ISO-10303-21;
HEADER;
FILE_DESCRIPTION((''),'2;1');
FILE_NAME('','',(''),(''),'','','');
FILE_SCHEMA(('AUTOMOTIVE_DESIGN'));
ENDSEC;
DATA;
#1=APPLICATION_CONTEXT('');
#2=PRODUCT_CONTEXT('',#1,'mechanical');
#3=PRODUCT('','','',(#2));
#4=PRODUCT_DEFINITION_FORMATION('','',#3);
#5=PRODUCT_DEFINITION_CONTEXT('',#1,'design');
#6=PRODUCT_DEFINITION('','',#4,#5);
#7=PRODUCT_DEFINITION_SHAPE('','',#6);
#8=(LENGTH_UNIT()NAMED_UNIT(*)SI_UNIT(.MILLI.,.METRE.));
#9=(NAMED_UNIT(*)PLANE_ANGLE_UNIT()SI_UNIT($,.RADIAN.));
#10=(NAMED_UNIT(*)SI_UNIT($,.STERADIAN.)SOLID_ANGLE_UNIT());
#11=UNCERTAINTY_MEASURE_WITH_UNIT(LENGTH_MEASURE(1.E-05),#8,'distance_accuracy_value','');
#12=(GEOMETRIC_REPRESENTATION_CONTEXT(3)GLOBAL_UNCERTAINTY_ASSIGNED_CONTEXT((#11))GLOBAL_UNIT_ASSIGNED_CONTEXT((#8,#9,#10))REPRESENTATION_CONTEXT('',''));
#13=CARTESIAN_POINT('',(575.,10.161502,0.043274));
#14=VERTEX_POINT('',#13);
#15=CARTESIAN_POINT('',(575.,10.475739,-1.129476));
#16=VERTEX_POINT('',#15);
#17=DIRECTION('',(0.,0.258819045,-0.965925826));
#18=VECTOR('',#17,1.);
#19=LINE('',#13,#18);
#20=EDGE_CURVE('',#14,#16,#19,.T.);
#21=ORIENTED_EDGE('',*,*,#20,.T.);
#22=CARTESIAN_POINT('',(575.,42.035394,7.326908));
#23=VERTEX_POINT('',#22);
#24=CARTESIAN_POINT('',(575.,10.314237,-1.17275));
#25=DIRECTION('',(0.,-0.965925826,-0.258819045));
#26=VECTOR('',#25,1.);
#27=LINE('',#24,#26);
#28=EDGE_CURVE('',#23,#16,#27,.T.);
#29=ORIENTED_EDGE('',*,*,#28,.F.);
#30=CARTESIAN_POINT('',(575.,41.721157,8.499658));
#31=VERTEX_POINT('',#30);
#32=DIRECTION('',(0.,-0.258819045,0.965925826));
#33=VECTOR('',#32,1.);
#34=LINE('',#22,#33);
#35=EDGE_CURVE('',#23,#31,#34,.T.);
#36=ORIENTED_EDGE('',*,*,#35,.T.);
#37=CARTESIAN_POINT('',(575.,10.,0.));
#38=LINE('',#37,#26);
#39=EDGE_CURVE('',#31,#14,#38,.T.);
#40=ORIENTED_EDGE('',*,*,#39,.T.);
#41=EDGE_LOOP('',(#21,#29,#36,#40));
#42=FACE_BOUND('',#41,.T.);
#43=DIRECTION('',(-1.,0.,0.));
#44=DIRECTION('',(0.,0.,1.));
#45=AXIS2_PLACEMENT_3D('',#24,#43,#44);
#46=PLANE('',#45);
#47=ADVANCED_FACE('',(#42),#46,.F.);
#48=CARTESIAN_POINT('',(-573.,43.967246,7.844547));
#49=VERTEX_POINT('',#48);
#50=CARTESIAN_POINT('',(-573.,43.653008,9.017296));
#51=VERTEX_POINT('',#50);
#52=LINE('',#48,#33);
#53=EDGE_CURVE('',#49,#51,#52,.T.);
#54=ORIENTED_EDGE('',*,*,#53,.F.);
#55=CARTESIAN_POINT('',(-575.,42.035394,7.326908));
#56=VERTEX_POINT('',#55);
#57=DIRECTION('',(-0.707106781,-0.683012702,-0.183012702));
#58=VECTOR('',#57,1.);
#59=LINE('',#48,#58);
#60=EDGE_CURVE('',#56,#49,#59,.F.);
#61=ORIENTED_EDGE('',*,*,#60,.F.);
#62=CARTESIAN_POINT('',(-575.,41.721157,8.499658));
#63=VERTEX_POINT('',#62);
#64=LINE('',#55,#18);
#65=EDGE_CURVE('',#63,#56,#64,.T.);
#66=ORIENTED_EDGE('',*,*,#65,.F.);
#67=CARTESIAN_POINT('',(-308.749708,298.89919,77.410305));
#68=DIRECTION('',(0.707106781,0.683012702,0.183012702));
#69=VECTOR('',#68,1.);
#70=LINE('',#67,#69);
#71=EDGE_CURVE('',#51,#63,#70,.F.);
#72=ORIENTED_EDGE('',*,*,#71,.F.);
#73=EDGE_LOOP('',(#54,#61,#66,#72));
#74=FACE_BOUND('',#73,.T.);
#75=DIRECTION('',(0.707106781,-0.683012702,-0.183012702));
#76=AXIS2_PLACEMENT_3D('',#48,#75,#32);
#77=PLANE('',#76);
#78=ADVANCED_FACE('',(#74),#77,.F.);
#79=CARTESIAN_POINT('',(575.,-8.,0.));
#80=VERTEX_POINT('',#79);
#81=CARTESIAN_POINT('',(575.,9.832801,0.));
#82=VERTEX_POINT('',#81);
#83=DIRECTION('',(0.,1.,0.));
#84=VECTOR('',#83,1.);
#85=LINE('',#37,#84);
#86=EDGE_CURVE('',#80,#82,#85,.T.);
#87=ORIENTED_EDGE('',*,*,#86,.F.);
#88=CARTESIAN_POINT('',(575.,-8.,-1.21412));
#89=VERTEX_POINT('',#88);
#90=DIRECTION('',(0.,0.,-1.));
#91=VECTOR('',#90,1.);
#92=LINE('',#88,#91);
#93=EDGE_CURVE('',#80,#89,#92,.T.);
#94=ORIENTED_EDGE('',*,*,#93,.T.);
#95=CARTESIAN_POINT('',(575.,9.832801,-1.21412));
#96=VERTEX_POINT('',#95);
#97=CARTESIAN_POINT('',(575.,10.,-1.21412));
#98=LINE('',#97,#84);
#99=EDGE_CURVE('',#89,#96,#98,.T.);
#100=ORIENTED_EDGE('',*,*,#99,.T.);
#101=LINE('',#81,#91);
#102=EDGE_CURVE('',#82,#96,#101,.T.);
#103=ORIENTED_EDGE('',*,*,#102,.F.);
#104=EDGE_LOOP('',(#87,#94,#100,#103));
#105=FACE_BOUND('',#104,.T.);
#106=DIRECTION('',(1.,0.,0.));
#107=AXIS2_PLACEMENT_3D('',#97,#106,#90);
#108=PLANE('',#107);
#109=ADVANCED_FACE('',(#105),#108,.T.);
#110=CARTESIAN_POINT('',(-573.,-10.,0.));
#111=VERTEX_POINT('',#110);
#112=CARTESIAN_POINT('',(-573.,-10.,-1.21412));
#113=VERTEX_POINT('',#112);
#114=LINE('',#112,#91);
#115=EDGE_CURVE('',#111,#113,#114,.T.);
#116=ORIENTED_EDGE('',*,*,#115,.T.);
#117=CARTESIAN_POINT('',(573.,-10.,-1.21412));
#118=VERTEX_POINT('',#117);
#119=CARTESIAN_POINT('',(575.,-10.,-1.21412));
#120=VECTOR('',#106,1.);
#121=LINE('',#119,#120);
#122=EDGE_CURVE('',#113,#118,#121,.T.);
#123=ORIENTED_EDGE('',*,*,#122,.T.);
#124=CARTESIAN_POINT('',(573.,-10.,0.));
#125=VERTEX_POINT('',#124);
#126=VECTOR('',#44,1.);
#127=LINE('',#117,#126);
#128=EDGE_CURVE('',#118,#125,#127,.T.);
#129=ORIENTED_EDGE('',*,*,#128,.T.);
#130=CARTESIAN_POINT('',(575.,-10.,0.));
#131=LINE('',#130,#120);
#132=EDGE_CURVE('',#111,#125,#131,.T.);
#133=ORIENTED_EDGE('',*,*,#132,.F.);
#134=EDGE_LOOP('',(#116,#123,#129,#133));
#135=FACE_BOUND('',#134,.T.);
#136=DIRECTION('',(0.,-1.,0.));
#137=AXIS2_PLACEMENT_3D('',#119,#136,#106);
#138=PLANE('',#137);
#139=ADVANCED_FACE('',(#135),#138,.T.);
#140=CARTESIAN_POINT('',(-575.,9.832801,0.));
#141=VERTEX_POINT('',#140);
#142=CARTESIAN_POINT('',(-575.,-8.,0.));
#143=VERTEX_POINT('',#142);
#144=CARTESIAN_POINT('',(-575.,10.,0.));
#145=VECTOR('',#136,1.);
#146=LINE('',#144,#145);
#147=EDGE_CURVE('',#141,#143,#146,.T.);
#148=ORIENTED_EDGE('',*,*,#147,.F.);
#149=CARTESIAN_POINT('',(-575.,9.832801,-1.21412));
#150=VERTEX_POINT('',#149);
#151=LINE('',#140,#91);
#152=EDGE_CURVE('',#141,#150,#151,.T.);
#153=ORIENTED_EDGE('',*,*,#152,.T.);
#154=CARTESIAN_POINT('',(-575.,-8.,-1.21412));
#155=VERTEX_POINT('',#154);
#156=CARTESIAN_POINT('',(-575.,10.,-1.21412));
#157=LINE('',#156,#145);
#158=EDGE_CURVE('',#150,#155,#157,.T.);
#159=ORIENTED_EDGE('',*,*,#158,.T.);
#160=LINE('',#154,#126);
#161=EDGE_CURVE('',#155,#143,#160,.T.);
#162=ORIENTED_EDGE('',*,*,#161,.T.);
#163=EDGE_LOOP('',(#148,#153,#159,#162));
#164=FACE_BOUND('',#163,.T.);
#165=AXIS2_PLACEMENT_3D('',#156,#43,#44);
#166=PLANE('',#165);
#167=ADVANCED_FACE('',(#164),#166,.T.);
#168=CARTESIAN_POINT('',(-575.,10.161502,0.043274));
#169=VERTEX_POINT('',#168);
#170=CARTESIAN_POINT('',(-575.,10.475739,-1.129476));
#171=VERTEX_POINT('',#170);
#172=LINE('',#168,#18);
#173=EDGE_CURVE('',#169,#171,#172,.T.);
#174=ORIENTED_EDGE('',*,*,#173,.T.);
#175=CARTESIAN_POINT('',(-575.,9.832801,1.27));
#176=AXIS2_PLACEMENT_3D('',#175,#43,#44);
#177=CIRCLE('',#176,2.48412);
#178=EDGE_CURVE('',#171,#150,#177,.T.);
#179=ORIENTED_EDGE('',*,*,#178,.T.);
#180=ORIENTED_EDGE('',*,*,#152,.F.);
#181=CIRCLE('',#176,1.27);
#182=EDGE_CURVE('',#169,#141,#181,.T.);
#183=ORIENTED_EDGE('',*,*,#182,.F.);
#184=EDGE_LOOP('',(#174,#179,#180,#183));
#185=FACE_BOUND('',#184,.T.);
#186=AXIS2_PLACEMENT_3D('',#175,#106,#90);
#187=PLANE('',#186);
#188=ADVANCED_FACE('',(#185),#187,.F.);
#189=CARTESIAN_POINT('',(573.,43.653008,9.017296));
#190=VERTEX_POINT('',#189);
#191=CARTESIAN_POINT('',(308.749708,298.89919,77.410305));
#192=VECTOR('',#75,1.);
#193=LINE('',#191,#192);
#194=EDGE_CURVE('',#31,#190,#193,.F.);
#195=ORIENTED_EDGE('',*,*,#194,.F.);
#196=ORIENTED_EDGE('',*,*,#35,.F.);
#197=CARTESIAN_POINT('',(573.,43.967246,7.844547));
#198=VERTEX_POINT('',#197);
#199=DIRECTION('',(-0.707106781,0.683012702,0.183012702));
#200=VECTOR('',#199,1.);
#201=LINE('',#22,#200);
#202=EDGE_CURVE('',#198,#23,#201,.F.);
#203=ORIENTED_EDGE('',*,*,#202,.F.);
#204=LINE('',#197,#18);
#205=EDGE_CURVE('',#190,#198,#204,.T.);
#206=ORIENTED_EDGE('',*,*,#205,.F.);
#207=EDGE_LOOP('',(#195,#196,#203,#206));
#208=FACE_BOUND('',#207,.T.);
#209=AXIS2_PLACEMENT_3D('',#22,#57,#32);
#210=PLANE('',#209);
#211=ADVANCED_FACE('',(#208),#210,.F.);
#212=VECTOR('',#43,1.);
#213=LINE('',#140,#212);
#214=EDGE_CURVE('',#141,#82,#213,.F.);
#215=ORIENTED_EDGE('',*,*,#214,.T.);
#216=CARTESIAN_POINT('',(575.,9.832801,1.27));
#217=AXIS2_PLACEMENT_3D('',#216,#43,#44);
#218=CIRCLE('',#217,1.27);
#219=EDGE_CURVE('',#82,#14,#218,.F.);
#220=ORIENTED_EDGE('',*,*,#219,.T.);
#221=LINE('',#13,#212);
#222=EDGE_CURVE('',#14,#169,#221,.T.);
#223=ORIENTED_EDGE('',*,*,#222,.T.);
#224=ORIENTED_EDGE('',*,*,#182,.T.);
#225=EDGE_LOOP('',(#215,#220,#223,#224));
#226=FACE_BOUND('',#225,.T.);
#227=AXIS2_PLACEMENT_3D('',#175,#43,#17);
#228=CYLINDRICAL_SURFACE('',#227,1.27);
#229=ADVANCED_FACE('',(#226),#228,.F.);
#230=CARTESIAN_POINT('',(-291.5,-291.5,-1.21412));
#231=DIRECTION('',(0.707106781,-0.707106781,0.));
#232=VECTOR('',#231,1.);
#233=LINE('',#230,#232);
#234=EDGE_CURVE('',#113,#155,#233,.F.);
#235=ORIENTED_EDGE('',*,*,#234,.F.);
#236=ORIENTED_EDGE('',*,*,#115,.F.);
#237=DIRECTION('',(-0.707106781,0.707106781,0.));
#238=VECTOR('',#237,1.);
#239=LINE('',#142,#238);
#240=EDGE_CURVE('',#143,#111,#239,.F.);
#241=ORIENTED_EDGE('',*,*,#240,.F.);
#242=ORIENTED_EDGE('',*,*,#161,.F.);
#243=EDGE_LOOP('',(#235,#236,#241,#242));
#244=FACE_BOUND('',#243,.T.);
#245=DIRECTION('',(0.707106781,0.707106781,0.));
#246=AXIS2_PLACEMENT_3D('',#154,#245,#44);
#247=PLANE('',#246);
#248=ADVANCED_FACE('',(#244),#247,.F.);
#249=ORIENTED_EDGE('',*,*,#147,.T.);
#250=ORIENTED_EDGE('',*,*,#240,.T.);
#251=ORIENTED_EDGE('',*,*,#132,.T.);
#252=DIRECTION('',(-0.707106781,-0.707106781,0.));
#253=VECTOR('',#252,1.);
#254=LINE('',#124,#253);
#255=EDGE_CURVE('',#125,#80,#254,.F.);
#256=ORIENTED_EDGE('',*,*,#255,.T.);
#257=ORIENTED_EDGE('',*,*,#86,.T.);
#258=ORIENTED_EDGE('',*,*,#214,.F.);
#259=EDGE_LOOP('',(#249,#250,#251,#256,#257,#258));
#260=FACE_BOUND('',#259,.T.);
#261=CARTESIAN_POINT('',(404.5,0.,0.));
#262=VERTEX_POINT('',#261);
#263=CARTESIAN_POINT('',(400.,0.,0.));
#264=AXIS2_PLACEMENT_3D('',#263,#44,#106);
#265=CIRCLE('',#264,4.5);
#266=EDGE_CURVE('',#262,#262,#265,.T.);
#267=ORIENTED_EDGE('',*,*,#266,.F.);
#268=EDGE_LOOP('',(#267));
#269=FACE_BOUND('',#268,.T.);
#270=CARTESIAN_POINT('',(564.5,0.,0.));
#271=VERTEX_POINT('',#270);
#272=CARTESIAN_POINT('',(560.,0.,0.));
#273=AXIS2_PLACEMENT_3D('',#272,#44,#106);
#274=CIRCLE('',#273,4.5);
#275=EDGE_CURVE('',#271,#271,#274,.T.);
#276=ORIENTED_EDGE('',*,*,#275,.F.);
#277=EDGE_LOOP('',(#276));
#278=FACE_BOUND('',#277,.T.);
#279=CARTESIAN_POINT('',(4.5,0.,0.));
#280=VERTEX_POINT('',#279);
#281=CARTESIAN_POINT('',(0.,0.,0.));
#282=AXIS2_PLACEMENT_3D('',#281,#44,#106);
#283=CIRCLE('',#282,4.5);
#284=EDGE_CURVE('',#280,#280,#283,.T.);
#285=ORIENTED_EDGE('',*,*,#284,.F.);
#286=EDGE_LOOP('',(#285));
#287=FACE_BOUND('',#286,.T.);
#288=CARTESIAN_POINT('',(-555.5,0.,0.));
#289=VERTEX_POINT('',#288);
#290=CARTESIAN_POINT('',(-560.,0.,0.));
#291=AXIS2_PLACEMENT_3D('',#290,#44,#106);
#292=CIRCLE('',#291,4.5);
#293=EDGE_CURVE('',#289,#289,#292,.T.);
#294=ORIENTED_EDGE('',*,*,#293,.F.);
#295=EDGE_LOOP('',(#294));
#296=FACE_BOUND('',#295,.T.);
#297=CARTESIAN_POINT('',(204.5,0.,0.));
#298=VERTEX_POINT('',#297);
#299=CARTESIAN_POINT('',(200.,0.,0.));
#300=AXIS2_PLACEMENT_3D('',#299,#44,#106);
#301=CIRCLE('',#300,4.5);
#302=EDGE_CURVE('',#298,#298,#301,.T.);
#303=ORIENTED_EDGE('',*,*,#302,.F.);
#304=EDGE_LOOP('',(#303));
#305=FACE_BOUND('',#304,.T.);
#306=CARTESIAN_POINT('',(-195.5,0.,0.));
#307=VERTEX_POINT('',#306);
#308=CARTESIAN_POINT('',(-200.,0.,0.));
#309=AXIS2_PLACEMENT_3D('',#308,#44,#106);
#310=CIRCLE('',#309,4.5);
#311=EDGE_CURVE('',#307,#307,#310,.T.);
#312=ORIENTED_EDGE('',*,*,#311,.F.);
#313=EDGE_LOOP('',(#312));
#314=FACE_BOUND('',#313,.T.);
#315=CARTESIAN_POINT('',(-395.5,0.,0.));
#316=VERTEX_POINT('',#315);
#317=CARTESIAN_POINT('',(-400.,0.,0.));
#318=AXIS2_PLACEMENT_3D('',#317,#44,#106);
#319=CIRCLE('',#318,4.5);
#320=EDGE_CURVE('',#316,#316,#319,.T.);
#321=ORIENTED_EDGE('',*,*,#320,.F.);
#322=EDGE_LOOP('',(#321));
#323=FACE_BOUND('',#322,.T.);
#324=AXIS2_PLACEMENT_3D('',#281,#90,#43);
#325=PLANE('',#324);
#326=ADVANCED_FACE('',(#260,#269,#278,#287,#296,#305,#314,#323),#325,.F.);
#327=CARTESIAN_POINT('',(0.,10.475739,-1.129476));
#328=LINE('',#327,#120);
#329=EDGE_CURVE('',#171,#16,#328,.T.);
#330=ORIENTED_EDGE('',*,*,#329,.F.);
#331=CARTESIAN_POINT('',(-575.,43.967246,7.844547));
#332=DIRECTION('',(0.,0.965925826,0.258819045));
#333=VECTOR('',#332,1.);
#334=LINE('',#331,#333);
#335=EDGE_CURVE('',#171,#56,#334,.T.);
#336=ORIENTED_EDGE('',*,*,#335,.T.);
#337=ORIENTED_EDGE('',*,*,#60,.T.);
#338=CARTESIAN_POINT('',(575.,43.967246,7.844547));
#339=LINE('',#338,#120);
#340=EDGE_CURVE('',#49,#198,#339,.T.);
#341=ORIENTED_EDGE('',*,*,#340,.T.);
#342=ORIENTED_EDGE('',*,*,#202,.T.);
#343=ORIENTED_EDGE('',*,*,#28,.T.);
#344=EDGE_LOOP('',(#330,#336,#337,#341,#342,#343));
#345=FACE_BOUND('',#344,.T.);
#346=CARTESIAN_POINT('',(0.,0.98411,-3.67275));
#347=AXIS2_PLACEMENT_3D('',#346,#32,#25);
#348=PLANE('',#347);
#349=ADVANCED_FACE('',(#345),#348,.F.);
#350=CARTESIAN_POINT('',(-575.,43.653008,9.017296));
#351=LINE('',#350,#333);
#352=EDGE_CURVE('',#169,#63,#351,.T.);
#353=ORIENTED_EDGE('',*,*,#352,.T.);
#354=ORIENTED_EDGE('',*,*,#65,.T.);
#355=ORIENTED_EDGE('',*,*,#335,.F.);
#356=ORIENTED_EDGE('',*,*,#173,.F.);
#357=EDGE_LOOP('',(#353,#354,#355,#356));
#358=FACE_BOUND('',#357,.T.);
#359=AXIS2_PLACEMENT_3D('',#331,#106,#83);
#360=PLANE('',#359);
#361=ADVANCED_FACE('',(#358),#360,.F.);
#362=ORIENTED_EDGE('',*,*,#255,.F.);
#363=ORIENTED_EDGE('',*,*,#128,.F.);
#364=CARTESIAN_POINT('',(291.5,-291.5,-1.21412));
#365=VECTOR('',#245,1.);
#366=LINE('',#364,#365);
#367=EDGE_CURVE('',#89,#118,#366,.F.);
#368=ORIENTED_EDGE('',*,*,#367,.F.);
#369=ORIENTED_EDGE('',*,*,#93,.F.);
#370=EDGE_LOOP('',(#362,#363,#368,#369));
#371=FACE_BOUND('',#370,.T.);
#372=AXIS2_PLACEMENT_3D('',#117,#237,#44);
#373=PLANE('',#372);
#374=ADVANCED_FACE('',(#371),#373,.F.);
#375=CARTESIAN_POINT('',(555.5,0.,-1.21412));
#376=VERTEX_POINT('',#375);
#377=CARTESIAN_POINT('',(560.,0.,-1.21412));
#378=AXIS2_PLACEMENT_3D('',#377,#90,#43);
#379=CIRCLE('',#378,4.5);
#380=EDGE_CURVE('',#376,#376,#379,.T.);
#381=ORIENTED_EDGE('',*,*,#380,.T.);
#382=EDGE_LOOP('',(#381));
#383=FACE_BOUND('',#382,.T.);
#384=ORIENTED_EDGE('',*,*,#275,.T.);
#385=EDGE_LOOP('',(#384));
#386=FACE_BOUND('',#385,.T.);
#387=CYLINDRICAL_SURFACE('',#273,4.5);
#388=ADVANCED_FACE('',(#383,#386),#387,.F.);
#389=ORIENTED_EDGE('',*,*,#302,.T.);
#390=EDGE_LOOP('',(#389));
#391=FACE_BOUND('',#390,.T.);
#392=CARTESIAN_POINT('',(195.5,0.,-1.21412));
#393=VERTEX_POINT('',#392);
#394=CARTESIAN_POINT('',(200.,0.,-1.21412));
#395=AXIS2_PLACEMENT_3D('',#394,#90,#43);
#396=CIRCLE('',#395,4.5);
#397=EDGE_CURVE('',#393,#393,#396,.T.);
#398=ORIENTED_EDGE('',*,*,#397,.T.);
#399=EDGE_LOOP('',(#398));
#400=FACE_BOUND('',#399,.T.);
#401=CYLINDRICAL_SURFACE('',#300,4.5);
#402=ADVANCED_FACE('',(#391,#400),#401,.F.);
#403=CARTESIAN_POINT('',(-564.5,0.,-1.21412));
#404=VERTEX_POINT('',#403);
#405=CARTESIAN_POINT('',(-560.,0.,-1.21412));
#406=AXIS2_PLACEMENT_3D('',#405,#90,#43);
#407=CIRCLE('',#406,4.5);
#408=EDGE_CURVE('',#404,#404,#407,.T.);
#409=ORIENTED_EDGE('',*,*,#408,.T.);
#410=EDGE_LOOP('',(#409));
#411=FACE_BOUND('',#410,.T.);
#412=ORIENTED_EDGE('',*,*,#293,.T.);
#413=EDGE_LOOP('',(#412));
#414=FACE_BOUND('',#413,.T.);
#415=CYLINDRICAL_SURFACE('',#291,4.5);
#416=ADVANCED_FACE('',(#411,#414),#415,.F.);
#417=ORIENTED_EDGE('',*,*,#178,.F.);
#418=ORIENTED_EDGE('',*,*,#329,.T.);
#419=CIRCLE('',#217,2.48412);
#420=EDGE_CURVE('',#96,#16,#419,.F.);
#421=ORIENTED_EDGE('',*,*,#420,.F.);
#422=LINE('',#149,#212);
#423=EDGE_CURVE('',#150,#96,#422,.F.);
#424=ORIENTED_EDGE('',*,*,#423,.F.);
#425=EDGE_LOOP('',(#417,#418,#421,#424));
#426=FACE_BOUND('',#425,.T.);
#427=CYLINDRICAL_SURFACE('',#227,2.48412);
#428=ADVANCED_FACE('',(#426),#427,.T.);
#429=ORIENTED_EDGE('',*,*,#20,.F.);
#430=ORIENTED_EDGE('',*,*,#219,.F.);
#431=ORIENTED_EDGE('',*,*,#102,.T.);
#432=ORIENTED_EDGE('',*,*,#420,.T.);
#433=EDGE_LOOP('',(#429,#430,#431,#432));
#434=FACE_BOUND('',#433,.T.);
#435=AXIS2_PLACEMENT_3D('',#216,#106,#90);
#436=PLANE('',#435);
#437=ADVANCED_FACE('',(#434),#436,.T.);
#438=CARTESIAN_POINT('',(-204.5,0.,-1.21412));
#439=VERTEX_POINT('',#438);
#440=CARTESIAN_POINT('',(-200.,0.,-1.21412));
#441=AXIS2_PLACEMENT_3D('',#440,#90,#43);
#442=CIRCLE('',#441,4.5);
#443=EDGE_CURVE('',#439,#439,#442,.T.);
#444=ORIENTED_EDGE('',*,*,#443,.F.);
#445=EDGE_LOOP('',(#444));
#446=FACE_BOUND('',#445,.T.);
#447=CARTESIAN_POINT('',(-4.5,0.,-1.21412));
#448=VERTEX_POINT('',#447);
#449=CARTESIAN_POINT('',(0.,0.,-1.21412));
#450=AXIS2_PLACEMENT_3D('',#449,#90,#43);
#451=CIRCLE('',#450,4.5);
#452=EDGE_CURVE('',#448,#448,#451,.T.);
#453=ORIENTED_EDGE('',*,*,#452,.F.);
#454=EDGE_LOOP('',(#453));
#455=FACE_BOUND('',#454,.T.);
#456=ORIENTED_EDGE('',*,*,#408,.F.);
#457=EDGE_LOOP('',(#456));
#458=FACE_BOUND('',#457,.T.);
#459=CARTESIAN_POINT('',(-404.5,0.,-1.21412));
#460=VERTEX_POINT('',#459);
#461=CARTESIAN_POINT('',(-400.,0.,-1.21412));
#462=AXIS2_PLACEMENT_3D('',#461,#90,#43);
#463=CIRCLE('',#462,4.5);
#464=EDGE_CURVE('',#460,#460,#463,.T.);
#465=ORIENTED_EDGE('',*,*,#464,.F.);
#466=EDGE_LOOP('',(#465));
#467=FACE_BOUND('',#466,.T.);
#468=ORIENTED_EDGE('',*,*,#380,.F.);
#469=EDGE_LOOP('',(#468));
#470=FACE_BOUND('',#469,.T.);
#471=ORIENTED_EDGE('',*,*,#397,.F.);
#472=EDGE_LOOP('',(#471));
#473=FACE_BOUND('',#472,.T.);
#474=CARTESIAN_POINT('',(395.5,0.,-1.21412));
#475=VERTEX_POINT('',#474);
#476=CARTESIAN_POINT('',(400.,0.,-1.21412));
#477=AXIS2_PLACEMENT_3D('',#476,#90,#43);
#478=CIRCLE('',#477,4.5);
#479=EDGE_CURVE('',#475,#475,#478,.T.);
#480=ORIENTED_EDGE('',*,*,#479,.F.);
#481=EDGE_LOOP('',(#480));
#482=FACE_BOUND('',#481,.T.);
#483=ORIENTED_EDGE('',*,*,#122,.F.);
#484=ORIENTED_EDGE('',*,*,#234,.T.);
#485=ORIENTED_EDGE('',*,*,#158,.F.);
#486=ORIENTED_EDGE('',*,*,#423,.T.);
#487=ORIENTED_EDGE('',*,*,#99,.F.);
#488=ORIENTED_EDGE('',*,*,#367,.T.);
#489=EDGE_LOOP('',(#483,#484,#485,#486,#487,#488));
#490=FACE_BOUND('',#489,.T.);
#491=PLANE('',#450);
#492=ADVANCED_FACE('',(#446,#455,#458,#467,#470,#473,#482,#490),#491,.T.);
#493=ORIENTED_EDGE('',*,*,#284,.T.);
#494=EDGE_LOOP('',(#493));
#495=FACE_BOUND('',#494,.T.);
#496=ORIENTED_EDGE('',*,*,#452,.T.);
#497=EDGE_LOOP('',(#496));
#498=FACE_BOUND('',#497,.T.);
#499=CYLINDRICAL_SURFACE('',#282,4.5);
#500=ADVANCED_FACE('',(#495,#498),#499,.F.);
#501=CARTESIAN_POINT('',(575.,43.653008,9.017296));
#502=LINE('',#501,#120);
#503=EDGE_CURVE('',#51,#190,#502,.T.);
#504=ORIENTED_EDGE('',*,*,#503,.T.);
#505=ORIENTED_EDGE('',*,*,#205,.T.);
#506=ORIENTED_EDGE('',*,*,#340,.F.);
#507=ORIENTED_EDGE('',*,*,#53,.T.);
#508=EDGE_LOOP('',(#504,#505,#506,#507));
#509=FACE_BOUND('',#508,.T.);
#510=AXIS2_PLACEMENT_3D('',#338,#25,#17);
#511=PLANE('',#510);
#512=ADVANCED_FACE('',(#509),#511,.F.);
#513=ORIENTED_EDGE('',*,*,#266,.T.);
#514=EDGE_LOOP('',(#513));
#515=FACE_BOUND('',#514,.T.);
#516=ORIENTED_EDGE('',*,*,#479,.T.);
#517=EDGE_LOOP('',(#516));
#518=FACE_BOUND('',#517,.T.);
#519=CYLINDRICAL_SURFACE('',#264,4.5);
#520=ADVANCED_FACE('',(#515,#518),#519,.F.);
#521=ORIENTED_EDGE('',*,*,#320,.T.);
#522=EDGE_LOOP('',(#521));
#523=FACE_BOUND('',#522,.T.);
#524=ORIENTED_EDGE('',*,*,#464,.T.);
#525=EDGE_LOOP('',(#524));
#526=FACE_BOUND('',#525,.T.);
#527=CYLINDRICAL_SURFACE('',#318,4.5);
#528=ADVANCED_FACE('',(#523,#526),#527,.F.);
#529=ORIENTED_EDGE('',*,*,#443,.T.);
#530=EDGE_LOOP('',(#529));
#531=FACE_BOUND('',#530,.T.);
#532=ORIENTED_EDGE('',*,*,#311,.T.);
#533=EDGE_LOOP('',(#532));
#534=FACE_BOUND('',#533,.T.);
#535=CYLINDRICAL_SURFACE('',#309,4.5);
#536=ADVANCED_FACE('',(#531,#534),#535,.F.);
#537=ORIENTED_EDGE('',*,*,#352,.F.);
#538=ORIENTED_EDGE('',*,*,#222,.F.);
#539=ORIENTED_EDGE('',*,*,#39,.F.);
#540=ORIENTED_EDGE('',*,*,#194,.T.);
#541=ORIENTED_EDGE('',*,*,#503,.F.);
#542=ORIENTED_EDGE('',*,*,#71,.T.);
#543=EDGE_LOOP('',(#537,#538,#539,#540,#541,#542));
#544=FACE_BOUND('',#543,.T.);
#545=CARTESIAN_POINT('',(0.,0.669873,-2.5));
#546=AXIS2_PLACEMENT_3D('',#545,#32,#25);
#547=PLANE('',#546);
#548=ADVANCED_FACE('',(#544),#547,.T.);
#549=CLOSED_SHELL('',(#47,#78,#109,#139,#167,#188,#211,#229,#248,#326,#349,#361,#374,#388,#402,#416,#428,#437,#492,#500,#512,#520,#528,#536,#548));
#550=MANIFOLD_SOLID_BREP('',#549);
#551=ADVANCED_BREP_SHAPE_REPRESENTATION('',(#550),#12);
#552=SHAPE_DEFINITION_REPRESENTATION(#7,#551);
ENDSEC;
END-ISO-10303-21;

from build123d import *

# Parameters (mm, degrees)
SKETCH1_W                    = 1150
SKETCH1_H                    = 20
BASE_FLANGE1_DEPTH           = 1.21412
EDGE_FLANGE1_STRIP_CUT_DEPTH = 1150
EDGE_FLANGE1_DEPTH           = 1150
M8_CLEARANCE_HOLE1_D         = 9
CHAMFER1_SIZE                = 2


# Sheet-metal steps are written as plain solids
with BuildPart() as part:
    # Sketch1 → Base-Flange1 (new body)
    with BuildSketch(Plane.XY):
        Rectangle(SKETCH1_W, SKETCH1_H)
    extrude(amount=-BASE_FLANGE1_DEPTH)

    # Edge-Flange1 strip (across the edge) → Edge-Flange1 strip cut (cut)
    with BuildSketch(Plane(origin=(575, 10, 0), x_dir=(0, -0.2588190451025146, 0.96592582628907), z_dir=(-1, 0, 0))):
        Polygon((-3.043825554, 6.668712161), (-1.129475664, -0.475738894), (0.043274201, -0.161501515), (-1.87107569, 6.98294954), align=None)
    extrude(amount=EDGE_FLANGE1_STRIP_CUT_DEPTH, mode=Mode.SUBTRACT)

    # Edge-Flange1 section (across the edge) → Edge-Flange1 (add)
    with BuildSketch(Plane(origin=(575, 10, 0), x_dir=(0, -0.2588190451025146, 0.96592582628907), z_dir=(-1, 0, 0))):
        with BuildLine():
            Line((-1.21412, 0.167198672), (-1.21412, 34.84015807))
            Line((-1.21412, 34.84015807), (0, 34.84015807))
            Line((0, 34.84015807), (0, 0.167198672))
            ThreePointArc((0, 0.167198672), (0.010865026, 0.001430408), (0.043274201, -0.161501515))
            Line((0.043274201, -0.161501515), (-1.129475664, -0.475738894))
            ThreePointArc((-1.129475664, -0.475738894), (-1.192868009, -0.157044053), (-1.21412, 0.167198672))
        make_face()
    extrude(amount=EDGE_FLANGE1_DEPTH)

    # M8 Clearance Hole1 (through all)
    with Locations(Plane.XY):
        with Locations((560, 0), (400, 0), (200, 0), (0, 0), (-200, 0), (-400, 0), (-560, 0)):
            Hole(M8_CLEARANCE_HOLE1_D / 2)

    # Chamfer1
    chamfer1_edges = [part.edges().sort_by_distance(p)[0] for p in [
        (575, 43.810127161, 8.430921511),
        (-575, 43.810127161, 8.430921511),
        (575, -10, -0.60706),
        (-575, -10, -0.60706),
    ]]
    chamfer(chamfer1_edges, length=CHAMFER1_SIZE)


solid = part.part
